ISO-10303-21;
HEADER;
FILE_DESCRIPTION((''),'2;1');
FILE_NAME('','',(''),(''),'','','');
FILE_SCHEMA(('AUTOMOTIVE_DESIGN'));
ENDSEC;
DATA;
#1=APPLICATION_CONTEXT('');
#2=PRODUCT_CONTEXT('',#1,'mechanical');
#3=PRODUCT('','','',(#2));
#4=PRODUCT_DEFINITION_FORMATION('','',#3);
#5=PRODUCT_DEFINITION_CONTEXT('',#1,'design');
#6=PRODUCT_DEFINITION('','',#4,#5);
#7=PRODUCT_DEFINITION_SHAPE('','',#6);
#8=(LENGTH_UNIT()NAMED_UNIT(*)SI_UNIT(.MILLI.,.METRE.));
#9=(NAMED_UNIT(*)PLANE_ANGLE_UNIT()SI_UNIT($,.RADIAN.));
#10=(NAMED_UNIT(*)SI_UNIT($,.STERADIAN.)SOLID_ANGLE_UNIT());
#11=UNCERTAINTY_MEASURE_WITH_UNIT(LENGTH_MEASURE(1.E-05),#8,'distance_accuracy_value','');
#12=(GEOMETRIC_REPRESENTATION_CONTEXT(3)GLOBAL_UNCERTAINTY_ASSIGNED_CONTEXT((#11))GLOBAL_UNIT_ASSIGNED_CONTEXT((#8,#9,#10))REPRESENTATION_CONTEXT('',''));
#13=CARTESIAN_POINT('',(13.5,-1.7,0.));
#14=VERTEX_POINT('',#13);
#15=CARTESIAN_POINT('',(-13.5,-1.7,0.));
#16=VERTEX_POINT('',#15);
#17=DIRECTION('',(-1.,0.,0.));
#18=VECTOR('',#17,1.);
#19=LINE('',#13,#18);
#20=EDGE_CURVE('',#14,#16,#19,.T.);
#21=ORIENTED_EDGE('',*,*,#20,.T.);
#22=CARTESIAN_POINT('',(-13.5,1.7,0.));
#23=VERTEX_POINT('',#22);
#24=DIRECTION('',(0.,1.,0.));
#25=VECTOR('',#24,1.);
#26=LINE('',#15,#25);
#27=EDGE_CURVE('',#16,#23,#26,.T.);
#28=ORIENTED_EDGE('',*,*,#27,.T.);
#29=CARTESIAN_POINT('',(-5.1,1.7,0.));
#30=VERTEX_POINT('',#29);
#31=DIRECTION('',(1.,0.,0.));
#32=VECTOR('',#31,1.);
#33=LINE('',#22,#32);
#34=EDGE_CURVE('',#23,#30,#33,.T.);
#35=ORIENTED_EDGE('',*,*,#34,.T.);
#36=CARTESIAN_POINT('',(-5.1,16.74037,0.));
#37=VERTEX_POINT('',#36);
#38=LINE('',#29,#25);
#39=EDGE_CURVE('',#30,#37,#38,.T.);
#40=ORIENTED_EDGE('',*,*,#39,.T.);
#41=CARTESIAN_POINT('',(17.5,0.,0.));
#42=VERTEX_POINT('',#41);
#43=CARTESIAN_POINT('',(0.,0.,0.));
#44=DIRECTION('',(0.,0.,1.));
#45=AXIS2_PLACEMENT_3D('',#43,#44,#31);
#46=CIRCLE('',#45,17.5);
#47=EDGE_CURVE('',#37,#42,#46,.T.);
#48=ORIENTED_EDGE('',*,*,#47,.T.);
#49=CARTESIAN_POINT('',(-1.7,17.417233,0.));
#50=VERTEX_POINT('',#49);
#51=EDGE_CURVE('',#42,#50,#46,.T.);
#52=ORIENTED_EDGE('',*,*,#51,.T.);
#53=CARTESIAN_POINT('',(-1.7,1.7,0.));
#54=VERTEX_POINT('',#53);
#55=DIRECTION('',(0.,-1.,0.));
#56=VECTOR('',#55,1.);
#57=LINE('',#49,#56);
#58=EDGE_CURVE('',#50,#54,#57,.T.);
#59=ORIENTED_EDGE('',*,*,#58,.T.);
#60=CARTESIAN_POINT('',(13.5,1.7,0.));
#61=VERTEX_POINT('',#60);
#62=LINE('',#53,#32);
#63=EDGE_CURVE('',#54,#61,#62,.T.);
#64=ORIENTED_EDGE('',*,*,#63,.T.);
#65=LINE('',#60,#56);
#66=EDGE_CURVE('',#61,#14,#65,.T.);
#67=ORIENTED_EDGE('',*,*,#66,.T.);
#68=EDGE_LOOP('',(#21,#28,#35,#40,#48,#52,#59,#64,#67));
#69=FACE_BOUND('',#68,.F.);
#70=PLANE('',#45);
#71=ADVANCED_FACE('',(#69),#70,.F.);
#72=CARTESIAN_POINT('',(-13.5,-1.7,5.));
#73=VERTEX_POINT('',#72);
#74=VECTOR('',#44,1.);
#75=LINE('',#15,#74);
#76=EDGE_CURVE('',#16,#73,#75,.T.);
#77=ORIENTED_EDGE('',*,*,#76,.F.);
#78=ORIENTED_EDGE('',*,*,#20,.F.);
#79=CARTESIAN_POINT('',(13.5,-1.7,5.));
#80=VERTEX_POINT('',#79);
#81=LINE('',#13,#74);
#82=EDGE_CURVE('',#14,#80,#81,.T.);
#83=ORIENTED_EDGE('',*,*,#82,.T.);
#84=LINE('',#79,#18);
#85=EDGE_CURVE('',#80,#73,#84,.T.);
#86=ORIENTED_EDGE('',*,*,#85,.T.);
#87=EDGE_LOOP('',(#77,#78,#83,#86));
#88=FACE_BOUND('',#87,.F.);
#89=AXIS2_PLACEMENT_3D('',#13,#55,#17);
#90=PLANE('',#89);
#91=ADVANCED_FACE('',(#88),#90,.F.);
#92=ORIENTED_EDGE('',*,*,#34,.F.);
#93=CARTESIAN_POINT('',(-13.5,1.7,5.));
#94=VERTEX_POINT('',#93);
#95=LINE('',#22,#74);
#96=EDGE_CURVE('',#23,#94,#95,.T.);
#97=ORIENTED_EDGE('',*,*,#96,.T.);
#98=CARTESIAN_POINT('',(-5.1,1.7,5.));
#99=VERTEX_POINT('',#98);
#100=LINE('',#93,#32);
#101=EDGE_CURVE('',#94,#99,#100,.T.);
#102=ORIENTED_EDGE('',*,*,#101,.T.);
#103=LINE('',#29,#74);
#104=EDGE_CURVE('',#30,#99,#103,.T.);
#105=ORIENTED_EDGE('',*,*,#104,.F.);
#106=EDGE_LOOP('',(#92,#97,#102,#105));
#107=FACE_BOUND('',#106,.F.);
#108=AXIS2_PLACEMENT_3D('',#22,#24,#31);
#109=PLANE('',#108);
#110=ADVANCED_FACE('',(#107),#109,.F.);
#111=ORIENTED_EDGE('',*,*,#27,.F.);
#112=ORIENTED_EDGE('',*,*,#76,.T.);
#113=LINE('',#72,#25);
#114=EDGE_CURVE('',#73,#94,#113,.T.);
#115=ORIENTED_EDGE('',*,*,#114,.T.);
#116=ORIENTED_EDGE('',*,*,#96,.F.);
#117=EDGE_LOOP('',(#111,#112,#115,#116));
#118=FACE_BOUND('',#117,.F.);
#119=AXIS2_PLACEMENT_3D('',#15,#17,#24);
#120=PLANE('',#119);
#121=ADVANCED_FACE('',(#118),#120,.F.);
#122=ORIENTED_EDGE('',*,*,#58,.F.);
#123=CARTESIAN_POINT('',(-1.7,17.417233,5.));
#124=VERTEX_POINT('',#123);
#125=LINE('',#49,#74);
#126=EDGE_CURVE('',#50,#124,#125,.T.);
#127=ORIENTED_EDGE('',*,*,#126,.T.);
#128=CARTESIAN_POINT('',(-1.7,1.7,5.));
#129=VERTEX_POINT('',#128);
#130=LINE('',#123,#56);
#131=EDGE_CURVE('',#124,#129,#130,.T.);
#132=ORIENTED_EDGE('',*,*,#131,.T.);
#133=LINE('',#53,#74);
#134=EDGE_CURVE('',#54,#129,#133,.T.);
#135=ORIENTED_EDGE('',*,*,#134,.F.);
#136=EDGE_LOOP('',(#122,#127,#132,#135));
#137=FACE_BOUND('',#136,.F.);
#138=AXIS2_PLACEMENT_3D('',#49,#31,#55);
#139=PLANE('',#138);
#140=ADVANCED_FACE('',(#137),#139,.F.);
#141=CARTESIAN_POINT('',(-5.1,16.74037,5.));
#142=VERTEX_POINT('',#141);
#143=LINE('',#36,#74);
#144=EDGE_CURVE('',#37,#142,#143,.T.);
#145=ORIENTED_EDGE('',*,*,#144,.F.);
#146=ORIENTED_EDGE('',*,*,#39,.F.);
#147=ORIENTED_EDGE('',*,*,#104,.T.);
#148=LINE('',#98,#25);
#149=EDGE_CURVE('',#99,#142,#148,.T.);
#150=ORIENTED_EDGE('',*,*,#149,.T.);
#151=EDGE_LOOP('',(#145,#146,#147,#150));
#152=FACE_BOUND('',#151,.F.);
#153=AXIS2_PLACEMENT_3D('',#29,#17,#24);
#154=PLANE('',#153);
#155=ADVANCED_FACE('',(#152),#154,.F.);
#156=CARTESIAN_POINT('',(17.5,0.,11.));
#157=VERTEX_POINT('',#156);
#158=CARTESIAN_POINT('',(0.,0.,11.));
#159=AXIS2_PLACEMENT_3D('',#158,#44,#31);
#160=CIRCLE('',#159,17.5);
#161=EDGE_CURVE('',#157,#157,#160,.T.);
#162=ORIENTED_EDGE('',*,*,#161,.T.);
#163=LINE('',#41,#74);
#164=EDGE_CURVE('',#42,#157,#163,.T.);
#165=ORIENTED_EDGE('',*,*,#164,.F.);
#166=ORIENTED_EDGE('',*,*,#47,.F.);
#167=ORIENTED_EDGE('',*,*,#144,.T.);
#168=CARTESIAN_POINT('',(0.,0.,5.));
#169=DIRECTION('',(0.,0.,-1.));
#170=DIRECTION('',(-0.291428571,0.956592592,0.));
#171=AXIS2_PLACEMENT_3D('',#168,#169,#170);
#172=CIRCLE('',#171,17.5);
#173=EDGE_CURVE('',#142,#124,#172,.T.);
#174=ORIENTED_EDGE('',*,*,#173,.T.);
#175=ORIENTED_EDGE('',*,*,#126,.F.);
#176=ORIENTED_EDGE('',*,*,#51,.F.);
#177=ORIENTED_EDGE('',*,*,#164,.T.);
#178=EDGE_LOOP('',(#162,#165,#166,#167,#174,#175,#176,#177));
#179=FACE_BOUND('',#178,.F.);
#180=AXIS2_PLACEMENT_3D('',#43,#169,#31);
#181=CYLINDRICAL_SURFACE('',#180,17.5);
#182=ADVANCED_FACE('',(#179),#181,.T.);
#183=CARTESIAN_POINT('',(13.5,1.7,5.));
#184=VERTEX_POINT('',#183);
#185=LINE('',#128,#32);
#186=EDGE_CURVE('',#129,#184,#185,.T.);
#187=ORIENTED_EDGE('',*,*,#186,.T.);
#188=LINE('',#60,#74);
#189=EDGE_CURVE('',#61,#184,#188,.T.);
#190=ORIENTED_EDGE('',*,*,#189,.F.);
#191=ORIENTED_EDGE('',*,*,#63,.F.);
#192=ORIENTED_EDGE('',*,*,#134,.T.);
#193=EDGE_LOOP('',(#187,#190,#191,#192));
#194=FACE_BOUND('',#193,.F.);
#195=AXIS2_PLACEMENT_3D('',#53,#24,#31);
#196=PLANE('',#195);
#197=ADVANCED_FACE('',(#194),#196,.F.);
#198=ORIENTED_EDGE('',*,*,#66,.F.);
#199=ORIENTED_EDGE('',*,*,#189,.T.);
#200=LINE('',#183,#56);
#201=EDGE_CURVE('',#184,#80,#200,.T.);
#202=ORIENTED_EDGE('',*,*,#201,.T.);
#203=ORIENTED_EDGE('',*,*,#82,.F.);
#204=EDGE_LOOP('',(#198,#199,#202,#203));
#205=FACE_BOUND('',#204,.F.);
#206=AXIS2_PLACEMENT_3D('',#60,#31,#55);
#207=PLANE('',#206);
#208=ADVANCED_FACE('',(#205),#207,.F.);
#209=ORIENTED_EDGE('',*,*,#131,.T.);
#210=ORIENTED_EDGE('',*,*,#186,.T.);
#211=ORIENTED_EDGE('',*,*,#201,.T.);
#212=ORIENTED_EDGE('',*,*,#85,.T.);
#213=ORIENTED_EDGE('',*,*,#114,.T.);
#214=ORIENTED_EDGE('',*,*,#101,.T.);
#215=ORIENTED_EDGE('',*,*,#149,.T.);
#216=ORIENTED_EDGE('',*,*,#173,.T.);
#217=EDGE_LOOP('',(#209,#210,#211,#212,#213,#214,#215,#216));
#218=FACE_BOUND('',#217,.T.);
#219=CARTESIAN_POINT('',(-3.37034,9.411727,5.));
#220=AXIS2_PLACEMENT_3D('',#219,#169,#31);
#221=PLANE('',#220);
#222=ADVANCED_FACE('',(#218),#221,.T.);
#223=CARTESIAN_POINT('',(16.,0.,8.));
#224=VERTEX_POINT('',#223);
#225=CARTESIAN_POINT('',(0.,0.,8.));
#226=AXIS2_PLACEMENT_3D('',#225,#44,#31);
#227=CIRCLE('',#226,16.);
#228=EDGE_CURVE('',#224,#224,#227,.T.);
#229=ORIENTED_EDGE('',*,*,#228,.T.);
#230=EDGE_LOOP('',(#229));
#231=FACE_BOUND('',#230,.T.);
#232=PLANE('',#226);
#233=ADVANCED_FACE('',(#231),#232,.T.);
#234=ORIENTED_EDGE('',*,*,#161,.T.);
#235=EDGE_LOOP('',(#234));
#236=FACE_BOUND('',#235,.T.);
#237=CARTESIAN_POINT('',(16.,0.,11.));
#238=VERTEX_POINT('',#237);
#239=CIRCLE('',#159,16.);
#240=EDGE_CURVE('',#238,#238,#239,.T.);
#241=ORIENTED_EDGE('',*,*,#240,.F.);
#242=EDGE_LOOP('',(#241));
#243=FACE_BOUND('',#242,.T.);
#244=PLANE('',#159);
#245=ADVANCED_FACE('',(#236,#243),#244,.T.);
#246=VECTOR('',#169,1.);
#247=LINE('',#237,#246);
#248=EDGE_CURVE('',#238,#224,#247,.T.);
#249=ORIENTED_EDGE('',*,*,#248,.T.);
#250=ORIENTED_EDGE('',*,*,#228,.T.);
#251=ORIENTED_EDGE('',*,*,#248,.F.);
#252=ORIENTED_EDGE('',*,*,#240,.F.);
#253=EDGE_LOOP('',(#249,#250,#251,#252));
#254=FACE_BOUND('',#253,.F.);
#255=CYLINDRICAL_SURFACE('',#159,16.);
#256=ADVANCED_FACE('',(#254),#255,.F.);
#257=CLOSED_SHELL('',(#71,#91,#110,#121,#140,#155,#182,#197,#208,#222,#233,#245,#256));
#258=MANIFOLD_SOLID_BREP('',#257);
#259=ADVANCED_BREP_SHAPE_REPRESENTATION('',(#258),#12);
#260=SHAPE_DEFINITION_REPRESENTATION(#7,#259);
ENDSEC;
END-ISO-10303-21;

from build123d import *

# Parameters (mm, degrees)
F0_R     = 17.5
F1_DEPTH = 11
F2_R     = 16
F3_DEPTH = 3
F4_W     = 13.5
F4_H     = 1.7
F5_DEPTH = 5


with BuildPart() as f1:
    # F0 (on Top) → F1 (new body)
    with BuildSketch(Plane.XY):
        Circle(F0_R)
    extrude(amount=F1_DEPTH)

    # F2 (on face) → F3 (cut)
    with BuildSketch(Plane.XY.offset(11)):
        Circle(F2_R)
    extrude(amount=-F3_DEPTH, mode=Mode.SUBTRACT)

    # F4 (on face) → F5 (cut)
    with BuildSketch(Plane(origin=(0, 0, 0), x_dir=(1, 0, 0), z_dir=(0, 0, -1))):
        with BuildLine():
            Line((-1.7, -17.4172328457), (-1.7, -1.7))
            Line((-1.7, -1.7), (-5.1, -1.7))
            Line((-5.1, -1.7), (-5.1, -16.7403703663))
            ThreePointArc((-5.1, -16.7403703663), (-3.4168019703, -17.1632008756), (-1.7, -17.4172328457))
        make_face()
        Polygon((0, -1.7), (0, 0), (-13.5, 0), (-13.5, -1.7), (-5.1, -1.7), (-1.7, -1.7), align=None)
        Polygon((13.5, 0), (0, 0), (0, -1.7), (1.7, -1.7), (13.5, -1.7), align=None)
        with Locations((6.75, 0.85)):
            Rectangle(F4_W, F4_H)
        with Locations((-6.75, 0.85)):
            Rectangle(F4_W, F4_H)
    extrude(amount=-F5_DEPTH, mode=Mode.SUBTRACT)


solid = f1.part
